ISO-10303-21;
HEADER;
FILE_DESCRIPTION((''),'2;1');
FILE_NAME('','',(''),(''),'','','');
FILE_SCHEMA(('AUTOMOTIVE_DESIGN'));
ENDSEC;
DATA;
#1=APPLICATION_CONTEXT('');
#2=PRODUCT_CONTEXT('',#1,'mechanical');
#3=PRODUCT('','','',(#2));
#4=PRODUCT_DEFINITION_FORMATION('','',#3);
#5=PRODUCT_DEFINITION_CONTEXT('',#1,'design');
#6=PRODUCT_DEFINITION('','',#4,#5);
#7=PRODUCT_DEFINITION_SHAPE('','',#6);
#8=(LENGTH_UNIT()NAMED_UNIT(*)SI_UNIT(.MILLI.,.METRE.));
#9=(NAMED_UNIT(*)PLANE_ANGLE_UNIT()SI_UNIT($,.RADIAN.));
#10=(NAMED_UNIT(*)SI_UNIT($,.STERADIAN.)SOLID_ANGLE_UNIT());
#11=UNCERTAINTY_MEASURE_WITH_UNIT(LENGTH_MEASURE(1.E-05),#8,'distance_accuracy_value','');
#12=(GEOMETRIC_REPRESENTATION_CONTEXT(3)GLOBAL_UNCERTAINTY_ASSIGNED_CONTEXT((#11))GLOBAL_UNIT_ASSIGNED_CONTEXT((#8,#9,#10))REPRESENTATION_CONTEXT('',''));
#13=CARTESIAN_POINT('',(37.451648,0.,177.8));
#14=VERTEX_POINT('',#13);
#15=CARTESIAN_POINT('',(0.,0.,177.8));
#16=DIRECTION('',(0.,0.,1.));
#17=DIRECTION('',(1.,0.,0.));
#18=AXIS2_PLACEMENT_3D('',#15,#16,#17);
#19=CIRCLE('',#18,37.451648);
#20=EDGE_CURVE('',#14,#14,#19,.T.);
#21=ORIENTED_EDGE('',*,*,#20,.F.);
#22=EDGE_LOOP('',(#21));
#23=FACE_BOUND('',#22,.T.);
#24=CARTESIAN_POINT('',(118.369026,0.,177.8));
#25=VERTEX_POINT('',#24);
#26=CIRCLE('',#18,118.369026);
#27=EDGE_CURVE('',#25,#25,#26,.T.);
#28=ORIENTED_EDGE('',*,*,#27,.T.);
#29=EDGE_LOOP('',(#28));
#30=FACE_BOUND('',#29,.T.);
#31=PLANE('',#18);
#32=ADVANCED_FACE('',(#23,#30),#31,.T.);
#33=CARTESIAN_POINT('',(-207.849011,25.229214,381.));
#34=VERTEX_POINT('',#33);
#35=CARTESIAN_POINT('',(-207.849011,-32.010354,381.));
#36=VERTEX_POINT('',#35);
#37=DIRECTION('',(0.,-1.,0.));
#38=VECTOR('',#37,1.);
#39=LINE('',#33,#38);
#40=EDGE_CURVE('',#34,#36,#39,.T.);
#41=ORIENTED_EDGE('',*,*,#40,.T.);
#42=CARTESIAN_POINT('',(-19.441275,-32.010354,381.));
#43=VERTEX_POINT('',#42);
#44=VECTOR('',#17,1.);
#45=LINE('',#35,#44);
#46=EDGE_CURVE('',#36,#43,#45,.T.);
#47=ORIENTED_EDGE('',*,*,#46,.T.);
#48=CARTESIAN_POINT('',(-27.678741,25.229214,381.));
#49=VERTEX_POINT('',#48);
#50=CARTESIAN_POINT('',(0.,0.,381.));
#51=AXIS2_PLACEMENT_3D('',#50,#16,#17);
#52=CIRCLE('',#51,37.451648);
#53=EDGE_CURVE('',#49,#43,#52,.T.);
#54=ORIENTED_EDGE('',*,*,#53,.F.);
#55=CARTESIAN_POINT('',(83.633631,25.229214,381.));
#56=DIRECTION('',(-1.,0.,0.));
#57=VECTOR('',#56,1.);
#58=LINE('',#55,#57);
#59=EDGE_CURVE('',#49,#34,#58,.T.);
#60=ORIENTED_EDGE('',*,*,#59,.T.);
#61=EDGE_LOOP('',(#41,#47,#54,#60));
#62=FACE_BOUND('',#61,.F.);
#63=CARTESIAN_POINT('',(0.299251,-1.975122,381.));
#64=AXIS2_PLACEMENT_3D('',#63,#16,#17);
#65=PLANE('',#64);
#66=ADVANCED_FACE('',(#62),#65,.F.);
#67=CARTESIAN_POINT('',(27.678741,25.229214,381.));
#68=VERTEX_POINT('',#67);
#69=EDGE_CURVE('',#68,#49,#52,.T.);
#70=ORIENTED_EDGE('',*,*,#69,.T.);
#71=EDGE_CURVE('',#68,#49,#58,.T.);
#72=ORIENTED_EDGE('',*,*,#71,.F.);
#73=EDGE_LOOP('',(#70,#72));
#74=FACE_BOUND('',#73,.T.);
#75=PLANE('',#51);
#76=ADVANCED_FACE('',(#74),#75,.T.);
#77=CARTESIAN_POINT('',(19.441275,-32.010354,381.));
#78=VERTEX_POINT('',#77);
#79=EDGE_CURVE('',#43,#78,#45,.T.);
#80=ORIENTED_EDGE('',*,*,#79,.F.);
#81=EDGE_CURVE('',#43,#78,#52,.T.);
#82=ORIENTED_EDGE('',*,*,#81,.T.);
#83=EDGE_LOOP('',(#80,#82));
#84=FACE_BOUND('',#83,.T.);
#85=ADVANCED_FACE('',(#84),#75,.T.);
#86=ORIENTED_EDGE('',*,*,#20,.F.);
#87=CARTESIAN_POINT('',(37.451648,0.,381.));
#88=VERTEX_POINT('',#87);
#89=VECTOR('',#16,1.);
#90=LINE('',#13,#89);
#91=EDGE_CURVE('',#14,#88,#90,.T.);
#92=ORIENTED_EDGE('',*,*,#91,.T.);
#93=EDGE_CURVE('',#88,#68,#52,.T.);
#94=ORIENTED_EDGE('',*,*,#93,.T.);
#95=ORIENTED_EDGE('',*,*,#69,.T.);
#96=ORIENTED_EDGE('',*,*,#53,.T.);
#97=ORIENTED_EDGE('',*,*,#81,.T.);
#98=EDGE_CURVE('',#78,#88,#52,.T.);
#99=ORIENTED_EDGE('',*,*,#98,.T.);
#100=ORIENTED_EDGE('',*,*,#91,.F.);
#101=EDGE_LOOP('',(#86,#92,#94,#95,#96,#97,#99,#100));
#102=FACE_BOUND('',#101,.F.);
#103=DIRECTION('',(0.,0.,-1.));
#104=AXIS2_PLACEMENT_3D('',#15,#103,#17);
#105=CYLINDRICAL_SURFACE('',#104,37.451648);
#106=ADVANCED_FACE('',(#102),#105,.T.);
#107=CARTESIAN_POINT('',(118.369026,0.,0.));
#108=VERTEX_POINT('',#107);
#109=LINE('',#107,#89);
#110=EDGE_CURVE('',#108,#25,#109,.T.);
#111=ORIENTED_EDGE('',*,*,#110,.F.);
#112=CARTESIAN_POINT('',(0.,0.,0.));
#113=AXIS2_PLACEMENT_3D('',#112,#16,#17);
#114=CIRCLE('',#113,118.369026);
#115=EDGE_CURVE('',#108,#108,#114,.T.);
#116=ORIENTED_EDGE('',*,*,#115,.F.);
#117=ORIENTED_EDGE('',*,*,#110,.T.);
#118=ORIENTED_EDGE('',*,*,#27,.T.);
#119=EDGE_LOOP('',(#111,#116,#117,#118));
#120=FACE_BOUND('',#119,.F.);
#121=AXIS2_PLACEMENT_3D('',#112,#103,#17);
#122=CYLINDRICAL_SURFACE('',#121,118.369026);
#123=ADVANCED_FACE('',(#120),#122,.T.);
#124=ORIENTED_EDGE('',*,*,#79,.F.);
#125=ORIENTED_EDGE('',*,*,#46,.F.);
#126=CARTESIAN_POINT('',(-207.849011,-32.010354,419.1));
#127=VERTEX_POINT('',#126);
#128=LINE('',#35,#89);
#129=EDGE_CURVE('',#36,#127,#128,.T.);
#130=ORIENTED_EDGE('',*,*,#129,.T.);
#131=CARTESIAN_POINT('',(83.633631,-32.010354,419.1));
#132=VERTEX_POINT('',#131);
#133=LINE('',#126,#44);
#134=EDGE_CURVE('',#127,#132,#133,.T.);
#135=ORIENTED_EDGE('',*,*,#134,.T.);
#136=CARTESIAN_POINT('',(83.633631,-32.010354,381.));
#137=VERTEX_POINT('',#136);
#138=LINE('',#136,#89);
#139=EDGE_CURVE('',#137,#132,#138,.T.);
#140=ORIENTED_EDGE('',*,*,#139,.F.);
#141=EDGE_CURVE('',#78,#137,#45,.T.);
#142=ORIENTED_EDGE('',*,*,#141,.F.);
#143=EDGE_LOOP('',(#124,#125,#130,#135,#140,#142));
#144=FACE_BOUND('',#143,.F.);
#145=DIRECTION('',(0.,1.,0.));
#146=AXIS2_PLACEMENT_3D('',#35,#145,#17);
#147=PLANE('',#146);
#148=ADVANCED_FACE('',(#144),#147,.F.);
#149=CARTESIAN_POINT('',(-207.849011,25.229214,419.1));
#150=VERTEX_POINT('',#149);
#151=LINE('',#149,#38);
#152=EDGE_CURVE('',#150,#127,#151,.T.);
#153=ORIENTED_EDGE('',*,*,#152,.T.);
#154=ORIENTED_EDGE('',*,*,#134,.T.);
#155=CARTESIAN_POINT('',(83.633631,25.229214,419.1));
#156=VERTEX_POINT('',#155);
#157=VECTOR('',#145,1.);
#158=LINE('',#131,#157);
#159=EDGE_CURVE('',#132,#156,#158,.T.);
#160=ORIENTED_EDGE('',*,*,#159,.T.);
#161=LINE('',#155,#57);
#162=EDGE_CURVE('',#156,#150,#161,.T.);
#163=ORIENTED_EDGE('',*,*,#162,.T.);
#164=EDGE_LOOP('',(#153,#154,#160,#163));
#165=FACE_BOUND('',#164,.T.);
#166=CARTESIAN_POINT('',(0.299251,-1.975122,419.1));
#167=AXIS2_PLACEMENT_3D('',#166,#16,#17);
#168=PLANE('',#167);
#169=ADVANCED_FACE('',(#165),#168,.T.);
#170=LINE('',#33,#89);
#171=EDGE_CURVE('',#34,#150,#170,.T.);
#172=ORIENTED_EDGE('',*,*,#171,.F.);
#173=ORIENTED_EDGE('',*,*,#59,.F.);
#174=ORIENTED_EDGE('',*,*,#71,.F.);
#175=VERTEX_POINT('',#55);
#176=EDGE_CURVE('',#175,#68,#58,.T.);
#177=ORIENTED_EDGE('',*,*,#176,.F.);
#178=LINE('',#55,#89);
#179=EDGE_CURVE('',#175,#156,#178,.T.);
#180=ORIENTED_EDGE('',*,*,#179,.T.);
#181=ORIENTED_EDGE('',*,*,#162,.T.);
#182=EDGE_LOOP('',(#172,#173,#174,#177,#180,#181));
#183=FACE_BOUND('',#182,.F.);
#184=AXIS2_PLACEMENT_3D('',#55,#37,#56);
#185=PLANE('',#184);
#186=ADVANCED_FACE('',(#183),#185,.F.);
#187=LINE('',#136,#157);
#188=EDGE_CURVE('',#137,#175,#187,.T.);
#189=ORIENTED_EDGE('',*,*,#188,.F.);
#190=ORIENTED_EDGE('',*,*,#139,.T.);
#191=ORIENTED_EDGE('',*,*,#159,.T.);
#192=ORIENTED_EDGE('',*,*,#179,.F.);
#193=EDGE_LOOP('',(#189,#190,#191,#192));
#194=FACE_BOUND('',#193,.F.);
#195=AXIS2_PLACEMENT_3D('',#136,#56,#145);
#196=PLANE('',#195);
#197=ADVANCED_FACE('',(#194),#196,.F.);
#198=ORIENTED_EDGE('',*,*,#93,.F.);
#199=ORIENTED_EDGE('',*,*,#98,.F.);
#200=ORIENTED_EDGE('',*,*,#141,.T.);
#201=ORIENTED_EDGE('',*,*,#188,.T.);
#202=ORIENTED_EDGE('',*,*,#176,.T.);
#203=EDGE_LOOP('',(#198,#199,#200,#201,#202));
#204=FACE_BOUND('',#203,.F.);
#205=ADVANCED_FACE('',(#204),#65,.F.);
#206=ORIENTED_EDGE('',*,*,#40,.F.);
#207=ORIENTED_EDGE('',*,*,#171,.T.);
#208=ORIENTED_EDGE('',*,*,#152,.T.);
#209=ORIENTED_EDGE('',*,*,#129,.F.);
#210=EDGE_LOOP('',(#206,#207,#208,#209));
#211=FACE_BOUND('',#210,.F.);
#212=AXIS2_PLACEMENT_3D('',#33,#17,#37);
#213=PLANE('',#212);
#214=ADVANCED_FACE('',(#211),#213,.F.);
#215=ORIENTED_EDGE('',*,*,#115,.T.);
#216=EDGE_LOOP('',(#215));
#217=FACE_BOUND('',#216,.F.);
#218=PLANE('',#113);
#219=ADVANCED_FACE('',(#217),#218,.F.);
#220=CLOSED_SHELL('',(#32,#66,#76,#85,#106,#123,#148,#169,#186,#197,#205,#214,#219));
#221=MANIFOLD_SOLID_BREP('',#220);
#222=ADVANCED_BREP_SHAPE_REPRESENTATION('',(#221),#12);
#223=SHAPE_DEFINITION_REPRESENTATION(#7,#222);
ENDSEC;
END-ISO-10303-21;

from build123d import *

# Parameters (mm, degrees)
F0_R     = 118.3690263596
F1_DEPTH = 177.8
F2_R     = 37.4516479343
F3_DEPTH = 203.2
F5_DEPTH = 38.1


with BuildPart() as f1:
    # F0 (on Top) → F1 (new body)
    with BuildSketch(Plane.XY):
        Circle(F0_R)
    extrude(amount=F1_DEPTH)

    # F2 (on face) → F3 (join)
    with BuildSketch(Plane.XY.offset(177.8)):
        Circle(F2_R)
    extrude(amount=F3_DEPTH)

    # F4 (on face) → F5 (join)
    with BuildSketch(Plane.XY.offset(381)):
        with BuildLine():
            Line((27.6787410495, 25.2292137593), (0, 25.2292137593))
            Line((0, 25.2292137593), (-27.6787410495, 25.2292137593))
            ThreePointArc((-27.6787410495, 25.2292137593), (-37.0697451311, -5.3347848045), (-19.441274734, -32.0103541017))
            Line((-19.441274734, -32.0103541017), (0, -32.0103541017))
            Line((0, -32.0103541017), (19.441274734, -32.0103541017))
            ThreePointArc((19.441274734, -32.0103541017), (32.6399579483, -18.3646148376), (37.4516479343, 0))
            ThreePointArc((37.4516479343, 0), (34.9230611348, 13.5279611906), (27.6787410495, 25.2292137593))
        make_face()
        with BuildLine():
            Line((83.6336314678, 25.2292137593), (27.6787410495, 25.2292137593))
            ThreePointArc((27.6787410495, 25.2292137593), (34.9230611348, 13.5279611906), (37.4516479343, 0))
            ThreePointArc((37.4516479343, 0), (32.6399579483, -18.3646148376), (19.441274734, -32.0103541017))
            Line((19.441274734, -32.0103541017), (83.6336314678, -32.0103541017))
            Line((83.6336314678, -32.0103541017), (83.6336314678, 0))
            Line((83.6336314678, 0), (83.6336314678, 25.2292137593))
        make_face()
        with BuildLine():
            ThreePointArc((-19.441274734, -32.0103541017), (-37.0697451311, -5.3347848045), (-27.6787410495, 25.2292137593))
            Line((-27.6787410495, 25.2292137593), (-207.8490108252, 25.2292137593))
            Line((-207.8490108252, 25.2292137593), (-207.8490108252, 0))
            Line((-207.8490108252, 0), (-207.8490108252, -32.0103541017))
            Line((-207.8490108252, -32.0103541017), (-19.441274734, -32.0103541017))
        make_face()
    extrude(amount=F5_DEPTH)


solid = f1.part
